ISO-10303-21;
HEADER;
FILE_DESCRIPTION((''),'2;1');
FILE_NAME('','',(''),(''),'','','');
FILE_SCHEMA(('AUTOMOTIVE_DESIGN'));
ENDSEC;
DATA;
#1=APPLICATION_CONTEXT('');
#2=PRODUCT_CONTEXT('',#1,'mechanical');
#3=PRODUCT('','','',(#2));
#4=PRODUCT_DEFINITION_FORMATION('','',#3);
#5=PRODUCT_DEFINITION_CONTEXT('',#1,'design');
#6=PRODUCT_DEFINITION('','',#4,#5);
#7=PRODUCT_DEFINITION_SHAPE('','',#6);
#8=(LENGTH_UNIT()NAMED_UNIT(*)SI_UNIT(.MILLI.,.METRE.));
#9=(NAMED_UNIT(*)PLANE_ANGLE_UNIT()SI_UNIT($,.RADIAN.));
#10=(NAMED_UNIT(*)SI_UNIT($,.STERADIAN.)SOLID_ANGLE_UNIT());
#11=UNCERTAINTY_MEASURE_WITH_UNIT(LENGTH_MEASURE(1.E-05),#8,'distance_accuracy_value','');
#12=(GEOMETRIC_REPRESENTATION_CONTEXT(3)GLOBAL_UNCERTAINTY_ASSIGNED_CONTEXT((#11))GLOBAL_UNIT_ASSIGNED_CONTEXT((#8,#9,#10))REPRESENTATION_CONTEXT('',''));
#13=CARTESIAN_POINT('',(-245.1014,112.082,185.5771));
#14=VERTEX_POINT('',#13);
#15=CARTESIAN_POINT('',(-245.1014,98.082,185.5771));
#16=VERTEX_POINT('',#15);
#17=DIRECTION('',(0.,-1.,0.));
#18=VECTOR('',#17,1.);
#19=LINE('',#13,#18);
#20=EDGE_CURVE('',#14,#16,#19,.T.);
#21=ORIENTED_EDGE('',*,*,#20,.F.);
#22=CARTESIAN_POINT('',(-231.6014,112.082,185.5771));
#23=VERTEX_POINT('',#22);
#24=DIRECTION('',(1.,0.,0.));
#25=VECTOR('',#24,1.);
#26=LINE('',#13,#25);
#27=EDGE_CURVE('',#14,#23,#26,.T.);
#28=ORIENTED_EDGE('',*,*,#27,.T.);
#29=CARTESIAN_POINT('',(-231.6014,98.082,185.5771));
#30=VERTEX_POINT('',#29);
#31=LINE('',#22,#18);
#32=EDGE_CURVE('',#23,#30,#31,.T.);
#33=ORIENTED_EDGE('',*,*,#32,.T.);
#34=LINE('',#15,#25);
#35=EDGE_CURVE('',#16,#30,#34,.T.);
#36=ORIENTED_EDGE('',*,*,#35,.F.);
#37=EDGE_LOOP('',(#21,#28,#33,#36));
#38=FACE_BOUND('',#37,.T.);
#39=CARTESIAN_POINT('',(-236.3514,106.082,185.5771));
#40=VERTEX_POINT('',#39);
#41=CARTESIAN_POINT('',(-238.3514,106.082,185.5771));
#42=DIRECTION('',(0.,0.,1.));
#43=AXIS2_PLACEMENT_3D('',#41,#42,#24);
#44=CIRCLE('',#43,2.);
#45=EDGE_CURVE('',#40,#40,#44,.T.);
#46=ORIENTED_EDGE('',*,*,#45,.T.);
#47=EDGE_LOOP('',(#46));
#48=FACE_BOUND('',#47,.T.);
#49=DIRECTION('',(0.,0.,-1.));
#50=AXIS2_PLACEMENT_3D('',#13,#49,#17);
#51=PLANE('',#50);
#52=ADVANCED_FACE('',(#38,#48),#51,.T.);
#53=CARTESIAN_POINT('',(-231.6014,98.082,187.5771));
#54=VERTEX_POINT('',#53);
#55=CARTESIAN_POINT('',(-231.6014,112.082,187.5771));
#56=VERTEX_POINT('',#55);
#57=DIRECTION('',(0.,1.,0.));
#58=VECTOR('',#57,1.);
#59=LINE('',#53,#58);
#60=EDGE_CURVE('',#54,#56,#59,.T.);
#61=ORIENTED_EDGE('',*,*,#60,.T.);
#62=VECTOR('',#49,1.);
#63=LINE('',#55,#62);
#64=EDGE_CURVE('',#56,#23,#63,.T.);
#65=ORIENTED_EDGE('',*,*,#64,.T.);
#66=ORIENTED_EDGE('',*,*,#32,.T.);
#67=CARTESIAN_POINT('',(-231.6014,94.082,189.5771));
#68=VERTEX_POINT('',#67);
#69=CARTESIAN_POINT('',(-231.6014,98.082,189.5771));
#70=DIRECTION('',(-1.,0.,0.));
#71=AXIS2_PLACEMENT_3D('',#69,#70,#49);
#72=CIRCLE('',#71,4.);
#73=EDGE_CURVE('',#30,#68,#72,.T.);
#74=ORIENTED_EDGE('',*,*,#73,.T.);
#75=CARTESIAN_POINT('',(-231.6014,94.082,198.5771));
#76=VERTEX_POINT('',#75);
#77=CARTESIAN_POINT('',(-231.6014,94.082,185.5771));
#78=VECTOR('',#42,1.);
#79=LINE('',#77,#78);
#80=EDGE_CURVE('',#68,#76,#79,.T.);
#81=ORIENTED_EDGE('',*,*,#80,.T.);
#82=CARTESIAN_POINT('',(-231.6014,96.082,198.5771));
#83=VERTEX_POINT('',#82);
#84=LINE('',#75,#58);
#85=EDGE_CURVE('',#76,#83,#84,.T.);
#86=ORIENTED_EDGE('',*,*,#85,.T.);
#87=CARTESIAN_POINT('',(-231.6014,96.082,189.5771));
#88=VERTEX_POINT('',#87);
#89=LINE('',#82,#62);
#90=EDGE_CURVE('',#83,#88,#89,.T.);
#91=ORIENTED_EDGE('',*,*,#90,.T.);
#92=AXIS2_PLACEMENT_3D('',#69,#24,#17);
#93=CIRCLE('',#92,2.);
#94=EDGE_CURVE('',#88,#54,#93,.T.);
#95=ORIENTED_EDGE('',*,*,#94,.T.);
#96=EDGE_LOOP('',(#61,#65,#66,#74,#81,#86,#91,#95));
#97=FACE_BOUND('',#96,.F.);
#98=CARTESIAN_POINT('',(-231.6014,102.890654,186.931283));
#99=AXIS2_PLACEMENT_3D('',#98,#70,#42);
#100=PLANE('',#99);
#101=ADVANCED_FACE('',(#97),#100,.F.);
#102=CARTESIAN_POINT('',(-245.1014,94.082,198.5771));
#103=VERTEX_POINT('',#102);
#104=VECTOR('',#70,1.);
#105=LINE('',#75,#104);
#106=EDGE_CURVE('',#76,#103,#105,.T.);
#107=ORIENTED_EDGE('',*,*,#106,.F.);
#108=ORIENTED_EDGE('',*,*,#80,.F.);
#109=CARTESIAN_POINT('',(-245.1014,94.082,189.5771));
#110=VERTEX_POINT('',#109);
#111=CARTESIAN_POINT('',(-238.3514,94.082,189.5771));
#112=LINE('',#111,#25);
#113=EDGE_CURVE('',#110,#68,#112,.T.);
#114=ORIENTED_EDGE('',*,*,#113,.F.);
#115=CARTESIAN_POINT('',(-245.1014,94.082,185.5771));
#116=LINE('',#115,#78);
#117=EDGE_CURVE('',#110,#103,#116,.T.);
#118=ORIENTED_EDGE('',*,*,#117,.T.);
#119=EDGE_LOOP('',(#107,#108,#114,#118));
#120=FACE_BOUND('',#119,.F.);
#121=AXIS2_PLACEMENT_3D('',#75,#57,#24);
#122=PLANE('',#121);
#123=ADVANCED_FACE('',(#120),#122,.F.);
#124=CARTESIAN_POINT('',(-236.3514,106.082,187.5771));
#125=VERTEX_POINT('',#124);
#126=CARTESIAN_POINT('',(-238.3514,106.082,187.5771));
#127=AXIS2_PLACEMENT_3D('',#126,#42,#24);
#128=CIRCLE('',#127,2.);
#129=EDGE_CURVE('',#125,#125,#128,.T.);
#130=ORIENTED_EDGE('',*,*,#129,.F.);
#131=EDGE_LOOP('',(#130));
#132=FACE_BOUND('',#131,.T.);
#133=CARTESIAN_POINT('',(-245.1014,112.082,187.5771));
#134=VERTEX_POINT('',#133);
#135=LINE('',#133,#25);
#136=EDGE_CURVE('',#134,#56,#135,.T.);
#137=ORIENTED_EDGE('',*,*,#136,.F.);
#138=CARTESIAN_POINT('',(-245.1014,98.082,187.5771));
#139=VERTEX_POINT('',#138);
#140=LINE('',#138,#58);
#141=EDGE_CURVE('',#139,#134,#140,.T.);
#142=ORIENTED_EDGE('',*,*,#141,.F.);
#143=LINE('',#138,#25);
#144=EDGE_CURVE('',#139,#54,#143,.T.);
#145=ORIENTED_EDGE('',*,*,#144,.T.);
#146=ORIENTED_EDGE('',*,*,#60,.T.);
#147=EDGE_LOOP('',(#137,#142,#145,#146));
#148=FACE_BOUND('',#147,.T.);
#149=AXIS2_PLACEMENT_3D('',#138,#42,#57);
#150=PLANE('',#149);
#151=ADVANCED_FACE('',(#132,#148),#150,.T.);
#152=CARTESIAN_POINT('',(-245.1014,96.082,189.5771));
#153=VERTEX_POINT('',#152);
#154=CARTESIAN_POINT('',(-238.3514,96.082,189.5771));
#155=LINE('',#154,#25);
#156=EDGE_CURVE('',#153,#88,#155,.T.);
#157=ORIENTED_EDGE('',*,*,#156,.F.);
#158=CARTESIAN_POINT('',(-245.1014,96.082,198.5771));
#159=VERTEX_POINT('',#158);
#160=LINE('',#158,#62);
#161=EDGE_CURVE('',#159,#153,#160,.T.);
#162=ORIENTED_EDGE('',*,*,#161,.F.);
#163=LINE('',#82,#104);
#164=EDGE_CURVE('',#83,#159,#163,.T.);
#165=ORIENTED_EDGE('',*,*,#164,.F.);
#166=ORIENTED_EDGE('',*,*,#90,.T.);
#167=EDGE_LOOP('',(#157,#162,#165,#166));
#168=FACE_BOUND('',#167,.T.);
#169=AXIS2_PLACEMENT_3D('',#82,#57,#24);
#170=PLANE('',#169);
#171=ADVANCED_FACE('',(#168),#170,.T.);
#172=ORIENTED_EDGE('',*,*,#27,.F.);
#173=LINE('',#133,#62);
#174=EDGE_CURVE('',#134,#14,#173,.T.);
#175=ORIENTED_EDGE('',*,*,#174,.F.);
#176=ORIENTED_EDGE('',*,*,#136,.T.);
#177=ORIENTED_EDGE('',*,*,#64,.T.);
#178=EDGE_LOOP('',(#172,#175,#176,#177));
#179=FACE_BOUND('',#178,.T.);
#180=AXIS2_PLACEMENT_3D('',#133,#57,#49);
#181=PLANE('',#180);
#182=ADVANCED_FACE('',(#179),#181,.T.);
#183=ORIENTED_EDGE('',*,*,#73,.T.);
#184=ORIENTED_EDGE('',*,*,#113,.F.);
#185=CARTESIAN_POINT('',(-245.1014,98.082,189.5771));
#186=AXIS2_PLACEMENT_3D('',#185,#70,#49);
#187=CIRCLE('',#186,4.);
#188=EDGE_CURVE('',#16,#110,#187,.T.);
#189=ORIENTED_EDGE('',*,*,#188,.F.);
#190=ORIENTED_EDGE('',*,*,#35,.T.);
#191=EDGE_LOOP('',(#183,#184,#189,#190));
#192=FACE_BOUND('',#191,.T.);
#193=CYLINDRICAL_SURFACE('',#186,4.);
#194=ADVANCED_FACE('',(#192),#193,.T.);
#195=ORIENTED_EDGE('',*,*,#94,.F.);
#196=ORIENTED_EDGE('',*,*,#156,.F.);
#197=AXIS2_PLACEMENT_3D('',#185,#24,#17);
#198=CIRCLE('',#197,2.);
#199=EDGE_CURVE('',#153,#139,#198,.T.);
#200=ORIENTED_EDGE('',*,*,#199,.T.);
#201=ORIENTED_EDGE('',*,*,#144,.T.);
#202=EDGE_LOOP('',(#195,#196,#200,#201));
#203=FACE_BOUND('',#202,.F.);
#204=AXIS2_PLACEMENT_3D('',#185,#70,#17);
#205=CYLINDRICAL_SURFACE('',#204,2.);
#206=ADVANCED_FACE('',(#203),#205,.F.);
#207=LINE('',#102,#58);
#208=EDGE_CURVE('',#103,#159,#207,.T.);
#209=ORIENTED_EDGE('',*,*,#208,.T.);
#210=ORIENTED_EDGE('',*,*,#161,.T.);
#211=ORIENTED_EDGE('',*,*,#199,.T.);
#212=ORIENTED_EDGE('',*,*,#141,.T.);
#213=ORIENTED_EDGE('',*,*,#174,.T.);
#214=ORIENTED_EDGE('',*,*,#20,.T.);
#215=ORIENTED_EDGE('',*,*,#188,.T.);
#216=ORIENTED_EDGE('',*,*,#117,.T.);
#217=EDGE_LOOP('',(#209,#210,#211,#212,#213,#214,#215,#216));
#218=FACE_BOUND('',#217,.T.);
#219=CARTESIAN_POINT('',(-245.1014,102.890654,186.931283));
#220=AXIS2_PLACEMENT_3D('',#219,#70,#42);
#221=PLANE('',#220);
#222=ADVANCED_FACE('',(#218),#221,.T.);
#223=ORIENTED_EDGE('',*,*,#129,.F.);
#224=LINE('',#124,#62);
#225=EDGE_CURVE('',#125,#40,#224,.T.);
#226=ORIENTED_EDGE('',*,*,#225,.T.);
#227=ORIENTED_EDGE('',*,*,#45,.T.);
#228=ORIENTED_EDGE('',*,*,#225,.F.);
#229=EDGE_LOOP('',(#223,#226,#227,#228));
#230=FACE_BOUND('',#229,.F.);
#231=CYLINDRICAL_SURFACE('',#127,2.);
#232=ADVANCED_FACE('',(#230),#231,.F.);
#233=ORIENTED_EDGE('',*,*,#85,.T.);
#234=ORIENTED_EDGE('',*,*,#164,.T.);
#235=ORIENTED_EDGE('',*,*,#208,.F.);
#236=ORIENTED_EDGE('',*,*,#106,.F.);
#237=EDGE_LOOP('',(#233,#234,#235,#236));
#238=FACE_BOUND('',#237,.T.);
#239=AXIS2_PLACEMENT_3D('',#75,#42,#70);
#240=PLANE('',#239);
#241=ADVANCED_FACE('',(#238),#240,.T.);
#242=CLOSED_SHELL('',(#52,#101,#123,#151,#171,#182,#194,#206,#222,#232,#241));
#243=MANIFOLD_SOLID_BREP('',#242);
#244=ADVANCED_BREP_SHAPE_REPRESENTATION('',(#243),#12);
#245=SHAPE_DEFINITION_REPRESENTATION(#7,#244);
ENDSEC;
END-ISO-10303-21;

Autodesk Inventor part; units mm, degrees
ref_plane "YZ Plane" through (0, 0, 0) normal (1, 0, 0) x (0, 1, 0)
ref_plane "XZ Plane" through (0, 0, 0) normal (0, 1, 0) x (-1, 0, 0)
ref_plane "Work Plane1" through (-238.4764, 94.082, 198.5771) normal (0, 1, 0) x (-1, 0, 0)
ref_plane "Work Plane2" through (-231.6014, 94.082, 198.5771) normal (0, 1, 0) x (1, 0, 0)
sketch "Sketch1" plane through (-231.6014, 94.082, 198.5771) normal (0, 1, 0) x (1, 0, 0)
  line L0 (-13.5, 2) -> (0, 2) projected
  line L1 (-13.5, 0) -> (-13.5, 2) projected
  line L2 (0, 0) -> (-13.5, 0) projected
  line L3 (0, 0) -> (0, 2) projected
  line L4 (-13.5, 0) -> (0, 0)
  line L5 (0, 0) -> (0, 13)
  line L6 (0, 13) -> (-13.5, 13)
  line L7 (-13.5, 13) -> (-13.5, 0)
  point P0 (231.6014, 198.5771)
  point P1 (0, 2)
  dimension "d0" = 13
extrude "Extrusion1" add sketch "Sketch1" along normal blind 2
ref_plane "Work Plane3" through (-238.3514, 112.082, 188.5771) normal (0, 1, 0) x (1, 0, 0)
sketch "Sketch2" plane through (-238.3514, 112.082, 188.5771) normal (0, 1, 0) x (1, 0, 0)
  line L0 (-10, 0) -> (10, 0)
  point P0 (238.3514, 188.5771)
sketch "Sketch3" plane through (-245.1014, 94.082, 187.5771) normal (0, 0, -1) x (-1, 0, 0)
  line L0 (-13.5, 0) -> (0, 0)
  line L1 (0, 0) -> (0, 18)
  line L2 (0, 18) -> (-13.5, 18)
  line L3 (-13.5, 18) -> (-13.5, 0)
edge flange "Flange1" height 18 angle 90 thickness 2 bend radius 2 thickness toward (0, 0, -1) relief tear relief width 2 relief depth 1 edges at (-238.3514, 96.082, 185.5771) wall of the first edge with corners at (-231.6014, 94.082, 187.5771) (-245.1014, 94.082, 187.5771) (-245.1014, 112.082, 187.5771) (-231.6014, 112.082, 187.5771)
bend "Bend1"
corner "Corner1"
sketch "Sketch4" plane through (-245.1014, 112.082, 187.5771) normal (0, 0, 1) x (1, 0, 0)
  circle A0 centre (6.75, -6) radius 2
  line L0 (13.5, 0) -> (0, 0) projected
  line L1 (6.75, 0) -> (6.75, -8.3247) construction
  point P0 (245.1014, -112.082)
  point P1 (6.75, -4)
  dimension "d14" = 4
  dimension "d15" = 4
extrude "Extrusion2" cut sketch "Sketch4" against normal through all
equation "\"d3\" = Thickness"
equation "\"d4\" = BendReliefWidth"
equation "\"d5\" = BendReliefDepth"
equation "\"d6\" = MinimumRemnant"
equation "\"d7\" = TransitionRadius"
equation "\"d10\" = BendRadius"
equation "\"d11\" = CornerReliefSize"
equation "\"d12\" = GapSize"
equation "\"d13\" = JacobiRadiusSize"
equation "\"BendRadius\" = Thickness"
equation "\"BendReliefWidth\" = Thickness"
equation "\"BendReliefDepth\" = 0.5 * Thickness"
equation "\"CornerReliefSize\" = 4 * Thickness"
equation "\"MinimumRemnant\" = 2 * Thickness"
equation "\"TransitionRadius\" = BendRadius"
equation "\"JacobiRadiusSize\" = BendRadius"
equation "\"GapSize\" = Thickness"
equation "\"Thickness\" = 2"
properties part number "BackWheelMountingPlate" material "Steel, Alloy"
